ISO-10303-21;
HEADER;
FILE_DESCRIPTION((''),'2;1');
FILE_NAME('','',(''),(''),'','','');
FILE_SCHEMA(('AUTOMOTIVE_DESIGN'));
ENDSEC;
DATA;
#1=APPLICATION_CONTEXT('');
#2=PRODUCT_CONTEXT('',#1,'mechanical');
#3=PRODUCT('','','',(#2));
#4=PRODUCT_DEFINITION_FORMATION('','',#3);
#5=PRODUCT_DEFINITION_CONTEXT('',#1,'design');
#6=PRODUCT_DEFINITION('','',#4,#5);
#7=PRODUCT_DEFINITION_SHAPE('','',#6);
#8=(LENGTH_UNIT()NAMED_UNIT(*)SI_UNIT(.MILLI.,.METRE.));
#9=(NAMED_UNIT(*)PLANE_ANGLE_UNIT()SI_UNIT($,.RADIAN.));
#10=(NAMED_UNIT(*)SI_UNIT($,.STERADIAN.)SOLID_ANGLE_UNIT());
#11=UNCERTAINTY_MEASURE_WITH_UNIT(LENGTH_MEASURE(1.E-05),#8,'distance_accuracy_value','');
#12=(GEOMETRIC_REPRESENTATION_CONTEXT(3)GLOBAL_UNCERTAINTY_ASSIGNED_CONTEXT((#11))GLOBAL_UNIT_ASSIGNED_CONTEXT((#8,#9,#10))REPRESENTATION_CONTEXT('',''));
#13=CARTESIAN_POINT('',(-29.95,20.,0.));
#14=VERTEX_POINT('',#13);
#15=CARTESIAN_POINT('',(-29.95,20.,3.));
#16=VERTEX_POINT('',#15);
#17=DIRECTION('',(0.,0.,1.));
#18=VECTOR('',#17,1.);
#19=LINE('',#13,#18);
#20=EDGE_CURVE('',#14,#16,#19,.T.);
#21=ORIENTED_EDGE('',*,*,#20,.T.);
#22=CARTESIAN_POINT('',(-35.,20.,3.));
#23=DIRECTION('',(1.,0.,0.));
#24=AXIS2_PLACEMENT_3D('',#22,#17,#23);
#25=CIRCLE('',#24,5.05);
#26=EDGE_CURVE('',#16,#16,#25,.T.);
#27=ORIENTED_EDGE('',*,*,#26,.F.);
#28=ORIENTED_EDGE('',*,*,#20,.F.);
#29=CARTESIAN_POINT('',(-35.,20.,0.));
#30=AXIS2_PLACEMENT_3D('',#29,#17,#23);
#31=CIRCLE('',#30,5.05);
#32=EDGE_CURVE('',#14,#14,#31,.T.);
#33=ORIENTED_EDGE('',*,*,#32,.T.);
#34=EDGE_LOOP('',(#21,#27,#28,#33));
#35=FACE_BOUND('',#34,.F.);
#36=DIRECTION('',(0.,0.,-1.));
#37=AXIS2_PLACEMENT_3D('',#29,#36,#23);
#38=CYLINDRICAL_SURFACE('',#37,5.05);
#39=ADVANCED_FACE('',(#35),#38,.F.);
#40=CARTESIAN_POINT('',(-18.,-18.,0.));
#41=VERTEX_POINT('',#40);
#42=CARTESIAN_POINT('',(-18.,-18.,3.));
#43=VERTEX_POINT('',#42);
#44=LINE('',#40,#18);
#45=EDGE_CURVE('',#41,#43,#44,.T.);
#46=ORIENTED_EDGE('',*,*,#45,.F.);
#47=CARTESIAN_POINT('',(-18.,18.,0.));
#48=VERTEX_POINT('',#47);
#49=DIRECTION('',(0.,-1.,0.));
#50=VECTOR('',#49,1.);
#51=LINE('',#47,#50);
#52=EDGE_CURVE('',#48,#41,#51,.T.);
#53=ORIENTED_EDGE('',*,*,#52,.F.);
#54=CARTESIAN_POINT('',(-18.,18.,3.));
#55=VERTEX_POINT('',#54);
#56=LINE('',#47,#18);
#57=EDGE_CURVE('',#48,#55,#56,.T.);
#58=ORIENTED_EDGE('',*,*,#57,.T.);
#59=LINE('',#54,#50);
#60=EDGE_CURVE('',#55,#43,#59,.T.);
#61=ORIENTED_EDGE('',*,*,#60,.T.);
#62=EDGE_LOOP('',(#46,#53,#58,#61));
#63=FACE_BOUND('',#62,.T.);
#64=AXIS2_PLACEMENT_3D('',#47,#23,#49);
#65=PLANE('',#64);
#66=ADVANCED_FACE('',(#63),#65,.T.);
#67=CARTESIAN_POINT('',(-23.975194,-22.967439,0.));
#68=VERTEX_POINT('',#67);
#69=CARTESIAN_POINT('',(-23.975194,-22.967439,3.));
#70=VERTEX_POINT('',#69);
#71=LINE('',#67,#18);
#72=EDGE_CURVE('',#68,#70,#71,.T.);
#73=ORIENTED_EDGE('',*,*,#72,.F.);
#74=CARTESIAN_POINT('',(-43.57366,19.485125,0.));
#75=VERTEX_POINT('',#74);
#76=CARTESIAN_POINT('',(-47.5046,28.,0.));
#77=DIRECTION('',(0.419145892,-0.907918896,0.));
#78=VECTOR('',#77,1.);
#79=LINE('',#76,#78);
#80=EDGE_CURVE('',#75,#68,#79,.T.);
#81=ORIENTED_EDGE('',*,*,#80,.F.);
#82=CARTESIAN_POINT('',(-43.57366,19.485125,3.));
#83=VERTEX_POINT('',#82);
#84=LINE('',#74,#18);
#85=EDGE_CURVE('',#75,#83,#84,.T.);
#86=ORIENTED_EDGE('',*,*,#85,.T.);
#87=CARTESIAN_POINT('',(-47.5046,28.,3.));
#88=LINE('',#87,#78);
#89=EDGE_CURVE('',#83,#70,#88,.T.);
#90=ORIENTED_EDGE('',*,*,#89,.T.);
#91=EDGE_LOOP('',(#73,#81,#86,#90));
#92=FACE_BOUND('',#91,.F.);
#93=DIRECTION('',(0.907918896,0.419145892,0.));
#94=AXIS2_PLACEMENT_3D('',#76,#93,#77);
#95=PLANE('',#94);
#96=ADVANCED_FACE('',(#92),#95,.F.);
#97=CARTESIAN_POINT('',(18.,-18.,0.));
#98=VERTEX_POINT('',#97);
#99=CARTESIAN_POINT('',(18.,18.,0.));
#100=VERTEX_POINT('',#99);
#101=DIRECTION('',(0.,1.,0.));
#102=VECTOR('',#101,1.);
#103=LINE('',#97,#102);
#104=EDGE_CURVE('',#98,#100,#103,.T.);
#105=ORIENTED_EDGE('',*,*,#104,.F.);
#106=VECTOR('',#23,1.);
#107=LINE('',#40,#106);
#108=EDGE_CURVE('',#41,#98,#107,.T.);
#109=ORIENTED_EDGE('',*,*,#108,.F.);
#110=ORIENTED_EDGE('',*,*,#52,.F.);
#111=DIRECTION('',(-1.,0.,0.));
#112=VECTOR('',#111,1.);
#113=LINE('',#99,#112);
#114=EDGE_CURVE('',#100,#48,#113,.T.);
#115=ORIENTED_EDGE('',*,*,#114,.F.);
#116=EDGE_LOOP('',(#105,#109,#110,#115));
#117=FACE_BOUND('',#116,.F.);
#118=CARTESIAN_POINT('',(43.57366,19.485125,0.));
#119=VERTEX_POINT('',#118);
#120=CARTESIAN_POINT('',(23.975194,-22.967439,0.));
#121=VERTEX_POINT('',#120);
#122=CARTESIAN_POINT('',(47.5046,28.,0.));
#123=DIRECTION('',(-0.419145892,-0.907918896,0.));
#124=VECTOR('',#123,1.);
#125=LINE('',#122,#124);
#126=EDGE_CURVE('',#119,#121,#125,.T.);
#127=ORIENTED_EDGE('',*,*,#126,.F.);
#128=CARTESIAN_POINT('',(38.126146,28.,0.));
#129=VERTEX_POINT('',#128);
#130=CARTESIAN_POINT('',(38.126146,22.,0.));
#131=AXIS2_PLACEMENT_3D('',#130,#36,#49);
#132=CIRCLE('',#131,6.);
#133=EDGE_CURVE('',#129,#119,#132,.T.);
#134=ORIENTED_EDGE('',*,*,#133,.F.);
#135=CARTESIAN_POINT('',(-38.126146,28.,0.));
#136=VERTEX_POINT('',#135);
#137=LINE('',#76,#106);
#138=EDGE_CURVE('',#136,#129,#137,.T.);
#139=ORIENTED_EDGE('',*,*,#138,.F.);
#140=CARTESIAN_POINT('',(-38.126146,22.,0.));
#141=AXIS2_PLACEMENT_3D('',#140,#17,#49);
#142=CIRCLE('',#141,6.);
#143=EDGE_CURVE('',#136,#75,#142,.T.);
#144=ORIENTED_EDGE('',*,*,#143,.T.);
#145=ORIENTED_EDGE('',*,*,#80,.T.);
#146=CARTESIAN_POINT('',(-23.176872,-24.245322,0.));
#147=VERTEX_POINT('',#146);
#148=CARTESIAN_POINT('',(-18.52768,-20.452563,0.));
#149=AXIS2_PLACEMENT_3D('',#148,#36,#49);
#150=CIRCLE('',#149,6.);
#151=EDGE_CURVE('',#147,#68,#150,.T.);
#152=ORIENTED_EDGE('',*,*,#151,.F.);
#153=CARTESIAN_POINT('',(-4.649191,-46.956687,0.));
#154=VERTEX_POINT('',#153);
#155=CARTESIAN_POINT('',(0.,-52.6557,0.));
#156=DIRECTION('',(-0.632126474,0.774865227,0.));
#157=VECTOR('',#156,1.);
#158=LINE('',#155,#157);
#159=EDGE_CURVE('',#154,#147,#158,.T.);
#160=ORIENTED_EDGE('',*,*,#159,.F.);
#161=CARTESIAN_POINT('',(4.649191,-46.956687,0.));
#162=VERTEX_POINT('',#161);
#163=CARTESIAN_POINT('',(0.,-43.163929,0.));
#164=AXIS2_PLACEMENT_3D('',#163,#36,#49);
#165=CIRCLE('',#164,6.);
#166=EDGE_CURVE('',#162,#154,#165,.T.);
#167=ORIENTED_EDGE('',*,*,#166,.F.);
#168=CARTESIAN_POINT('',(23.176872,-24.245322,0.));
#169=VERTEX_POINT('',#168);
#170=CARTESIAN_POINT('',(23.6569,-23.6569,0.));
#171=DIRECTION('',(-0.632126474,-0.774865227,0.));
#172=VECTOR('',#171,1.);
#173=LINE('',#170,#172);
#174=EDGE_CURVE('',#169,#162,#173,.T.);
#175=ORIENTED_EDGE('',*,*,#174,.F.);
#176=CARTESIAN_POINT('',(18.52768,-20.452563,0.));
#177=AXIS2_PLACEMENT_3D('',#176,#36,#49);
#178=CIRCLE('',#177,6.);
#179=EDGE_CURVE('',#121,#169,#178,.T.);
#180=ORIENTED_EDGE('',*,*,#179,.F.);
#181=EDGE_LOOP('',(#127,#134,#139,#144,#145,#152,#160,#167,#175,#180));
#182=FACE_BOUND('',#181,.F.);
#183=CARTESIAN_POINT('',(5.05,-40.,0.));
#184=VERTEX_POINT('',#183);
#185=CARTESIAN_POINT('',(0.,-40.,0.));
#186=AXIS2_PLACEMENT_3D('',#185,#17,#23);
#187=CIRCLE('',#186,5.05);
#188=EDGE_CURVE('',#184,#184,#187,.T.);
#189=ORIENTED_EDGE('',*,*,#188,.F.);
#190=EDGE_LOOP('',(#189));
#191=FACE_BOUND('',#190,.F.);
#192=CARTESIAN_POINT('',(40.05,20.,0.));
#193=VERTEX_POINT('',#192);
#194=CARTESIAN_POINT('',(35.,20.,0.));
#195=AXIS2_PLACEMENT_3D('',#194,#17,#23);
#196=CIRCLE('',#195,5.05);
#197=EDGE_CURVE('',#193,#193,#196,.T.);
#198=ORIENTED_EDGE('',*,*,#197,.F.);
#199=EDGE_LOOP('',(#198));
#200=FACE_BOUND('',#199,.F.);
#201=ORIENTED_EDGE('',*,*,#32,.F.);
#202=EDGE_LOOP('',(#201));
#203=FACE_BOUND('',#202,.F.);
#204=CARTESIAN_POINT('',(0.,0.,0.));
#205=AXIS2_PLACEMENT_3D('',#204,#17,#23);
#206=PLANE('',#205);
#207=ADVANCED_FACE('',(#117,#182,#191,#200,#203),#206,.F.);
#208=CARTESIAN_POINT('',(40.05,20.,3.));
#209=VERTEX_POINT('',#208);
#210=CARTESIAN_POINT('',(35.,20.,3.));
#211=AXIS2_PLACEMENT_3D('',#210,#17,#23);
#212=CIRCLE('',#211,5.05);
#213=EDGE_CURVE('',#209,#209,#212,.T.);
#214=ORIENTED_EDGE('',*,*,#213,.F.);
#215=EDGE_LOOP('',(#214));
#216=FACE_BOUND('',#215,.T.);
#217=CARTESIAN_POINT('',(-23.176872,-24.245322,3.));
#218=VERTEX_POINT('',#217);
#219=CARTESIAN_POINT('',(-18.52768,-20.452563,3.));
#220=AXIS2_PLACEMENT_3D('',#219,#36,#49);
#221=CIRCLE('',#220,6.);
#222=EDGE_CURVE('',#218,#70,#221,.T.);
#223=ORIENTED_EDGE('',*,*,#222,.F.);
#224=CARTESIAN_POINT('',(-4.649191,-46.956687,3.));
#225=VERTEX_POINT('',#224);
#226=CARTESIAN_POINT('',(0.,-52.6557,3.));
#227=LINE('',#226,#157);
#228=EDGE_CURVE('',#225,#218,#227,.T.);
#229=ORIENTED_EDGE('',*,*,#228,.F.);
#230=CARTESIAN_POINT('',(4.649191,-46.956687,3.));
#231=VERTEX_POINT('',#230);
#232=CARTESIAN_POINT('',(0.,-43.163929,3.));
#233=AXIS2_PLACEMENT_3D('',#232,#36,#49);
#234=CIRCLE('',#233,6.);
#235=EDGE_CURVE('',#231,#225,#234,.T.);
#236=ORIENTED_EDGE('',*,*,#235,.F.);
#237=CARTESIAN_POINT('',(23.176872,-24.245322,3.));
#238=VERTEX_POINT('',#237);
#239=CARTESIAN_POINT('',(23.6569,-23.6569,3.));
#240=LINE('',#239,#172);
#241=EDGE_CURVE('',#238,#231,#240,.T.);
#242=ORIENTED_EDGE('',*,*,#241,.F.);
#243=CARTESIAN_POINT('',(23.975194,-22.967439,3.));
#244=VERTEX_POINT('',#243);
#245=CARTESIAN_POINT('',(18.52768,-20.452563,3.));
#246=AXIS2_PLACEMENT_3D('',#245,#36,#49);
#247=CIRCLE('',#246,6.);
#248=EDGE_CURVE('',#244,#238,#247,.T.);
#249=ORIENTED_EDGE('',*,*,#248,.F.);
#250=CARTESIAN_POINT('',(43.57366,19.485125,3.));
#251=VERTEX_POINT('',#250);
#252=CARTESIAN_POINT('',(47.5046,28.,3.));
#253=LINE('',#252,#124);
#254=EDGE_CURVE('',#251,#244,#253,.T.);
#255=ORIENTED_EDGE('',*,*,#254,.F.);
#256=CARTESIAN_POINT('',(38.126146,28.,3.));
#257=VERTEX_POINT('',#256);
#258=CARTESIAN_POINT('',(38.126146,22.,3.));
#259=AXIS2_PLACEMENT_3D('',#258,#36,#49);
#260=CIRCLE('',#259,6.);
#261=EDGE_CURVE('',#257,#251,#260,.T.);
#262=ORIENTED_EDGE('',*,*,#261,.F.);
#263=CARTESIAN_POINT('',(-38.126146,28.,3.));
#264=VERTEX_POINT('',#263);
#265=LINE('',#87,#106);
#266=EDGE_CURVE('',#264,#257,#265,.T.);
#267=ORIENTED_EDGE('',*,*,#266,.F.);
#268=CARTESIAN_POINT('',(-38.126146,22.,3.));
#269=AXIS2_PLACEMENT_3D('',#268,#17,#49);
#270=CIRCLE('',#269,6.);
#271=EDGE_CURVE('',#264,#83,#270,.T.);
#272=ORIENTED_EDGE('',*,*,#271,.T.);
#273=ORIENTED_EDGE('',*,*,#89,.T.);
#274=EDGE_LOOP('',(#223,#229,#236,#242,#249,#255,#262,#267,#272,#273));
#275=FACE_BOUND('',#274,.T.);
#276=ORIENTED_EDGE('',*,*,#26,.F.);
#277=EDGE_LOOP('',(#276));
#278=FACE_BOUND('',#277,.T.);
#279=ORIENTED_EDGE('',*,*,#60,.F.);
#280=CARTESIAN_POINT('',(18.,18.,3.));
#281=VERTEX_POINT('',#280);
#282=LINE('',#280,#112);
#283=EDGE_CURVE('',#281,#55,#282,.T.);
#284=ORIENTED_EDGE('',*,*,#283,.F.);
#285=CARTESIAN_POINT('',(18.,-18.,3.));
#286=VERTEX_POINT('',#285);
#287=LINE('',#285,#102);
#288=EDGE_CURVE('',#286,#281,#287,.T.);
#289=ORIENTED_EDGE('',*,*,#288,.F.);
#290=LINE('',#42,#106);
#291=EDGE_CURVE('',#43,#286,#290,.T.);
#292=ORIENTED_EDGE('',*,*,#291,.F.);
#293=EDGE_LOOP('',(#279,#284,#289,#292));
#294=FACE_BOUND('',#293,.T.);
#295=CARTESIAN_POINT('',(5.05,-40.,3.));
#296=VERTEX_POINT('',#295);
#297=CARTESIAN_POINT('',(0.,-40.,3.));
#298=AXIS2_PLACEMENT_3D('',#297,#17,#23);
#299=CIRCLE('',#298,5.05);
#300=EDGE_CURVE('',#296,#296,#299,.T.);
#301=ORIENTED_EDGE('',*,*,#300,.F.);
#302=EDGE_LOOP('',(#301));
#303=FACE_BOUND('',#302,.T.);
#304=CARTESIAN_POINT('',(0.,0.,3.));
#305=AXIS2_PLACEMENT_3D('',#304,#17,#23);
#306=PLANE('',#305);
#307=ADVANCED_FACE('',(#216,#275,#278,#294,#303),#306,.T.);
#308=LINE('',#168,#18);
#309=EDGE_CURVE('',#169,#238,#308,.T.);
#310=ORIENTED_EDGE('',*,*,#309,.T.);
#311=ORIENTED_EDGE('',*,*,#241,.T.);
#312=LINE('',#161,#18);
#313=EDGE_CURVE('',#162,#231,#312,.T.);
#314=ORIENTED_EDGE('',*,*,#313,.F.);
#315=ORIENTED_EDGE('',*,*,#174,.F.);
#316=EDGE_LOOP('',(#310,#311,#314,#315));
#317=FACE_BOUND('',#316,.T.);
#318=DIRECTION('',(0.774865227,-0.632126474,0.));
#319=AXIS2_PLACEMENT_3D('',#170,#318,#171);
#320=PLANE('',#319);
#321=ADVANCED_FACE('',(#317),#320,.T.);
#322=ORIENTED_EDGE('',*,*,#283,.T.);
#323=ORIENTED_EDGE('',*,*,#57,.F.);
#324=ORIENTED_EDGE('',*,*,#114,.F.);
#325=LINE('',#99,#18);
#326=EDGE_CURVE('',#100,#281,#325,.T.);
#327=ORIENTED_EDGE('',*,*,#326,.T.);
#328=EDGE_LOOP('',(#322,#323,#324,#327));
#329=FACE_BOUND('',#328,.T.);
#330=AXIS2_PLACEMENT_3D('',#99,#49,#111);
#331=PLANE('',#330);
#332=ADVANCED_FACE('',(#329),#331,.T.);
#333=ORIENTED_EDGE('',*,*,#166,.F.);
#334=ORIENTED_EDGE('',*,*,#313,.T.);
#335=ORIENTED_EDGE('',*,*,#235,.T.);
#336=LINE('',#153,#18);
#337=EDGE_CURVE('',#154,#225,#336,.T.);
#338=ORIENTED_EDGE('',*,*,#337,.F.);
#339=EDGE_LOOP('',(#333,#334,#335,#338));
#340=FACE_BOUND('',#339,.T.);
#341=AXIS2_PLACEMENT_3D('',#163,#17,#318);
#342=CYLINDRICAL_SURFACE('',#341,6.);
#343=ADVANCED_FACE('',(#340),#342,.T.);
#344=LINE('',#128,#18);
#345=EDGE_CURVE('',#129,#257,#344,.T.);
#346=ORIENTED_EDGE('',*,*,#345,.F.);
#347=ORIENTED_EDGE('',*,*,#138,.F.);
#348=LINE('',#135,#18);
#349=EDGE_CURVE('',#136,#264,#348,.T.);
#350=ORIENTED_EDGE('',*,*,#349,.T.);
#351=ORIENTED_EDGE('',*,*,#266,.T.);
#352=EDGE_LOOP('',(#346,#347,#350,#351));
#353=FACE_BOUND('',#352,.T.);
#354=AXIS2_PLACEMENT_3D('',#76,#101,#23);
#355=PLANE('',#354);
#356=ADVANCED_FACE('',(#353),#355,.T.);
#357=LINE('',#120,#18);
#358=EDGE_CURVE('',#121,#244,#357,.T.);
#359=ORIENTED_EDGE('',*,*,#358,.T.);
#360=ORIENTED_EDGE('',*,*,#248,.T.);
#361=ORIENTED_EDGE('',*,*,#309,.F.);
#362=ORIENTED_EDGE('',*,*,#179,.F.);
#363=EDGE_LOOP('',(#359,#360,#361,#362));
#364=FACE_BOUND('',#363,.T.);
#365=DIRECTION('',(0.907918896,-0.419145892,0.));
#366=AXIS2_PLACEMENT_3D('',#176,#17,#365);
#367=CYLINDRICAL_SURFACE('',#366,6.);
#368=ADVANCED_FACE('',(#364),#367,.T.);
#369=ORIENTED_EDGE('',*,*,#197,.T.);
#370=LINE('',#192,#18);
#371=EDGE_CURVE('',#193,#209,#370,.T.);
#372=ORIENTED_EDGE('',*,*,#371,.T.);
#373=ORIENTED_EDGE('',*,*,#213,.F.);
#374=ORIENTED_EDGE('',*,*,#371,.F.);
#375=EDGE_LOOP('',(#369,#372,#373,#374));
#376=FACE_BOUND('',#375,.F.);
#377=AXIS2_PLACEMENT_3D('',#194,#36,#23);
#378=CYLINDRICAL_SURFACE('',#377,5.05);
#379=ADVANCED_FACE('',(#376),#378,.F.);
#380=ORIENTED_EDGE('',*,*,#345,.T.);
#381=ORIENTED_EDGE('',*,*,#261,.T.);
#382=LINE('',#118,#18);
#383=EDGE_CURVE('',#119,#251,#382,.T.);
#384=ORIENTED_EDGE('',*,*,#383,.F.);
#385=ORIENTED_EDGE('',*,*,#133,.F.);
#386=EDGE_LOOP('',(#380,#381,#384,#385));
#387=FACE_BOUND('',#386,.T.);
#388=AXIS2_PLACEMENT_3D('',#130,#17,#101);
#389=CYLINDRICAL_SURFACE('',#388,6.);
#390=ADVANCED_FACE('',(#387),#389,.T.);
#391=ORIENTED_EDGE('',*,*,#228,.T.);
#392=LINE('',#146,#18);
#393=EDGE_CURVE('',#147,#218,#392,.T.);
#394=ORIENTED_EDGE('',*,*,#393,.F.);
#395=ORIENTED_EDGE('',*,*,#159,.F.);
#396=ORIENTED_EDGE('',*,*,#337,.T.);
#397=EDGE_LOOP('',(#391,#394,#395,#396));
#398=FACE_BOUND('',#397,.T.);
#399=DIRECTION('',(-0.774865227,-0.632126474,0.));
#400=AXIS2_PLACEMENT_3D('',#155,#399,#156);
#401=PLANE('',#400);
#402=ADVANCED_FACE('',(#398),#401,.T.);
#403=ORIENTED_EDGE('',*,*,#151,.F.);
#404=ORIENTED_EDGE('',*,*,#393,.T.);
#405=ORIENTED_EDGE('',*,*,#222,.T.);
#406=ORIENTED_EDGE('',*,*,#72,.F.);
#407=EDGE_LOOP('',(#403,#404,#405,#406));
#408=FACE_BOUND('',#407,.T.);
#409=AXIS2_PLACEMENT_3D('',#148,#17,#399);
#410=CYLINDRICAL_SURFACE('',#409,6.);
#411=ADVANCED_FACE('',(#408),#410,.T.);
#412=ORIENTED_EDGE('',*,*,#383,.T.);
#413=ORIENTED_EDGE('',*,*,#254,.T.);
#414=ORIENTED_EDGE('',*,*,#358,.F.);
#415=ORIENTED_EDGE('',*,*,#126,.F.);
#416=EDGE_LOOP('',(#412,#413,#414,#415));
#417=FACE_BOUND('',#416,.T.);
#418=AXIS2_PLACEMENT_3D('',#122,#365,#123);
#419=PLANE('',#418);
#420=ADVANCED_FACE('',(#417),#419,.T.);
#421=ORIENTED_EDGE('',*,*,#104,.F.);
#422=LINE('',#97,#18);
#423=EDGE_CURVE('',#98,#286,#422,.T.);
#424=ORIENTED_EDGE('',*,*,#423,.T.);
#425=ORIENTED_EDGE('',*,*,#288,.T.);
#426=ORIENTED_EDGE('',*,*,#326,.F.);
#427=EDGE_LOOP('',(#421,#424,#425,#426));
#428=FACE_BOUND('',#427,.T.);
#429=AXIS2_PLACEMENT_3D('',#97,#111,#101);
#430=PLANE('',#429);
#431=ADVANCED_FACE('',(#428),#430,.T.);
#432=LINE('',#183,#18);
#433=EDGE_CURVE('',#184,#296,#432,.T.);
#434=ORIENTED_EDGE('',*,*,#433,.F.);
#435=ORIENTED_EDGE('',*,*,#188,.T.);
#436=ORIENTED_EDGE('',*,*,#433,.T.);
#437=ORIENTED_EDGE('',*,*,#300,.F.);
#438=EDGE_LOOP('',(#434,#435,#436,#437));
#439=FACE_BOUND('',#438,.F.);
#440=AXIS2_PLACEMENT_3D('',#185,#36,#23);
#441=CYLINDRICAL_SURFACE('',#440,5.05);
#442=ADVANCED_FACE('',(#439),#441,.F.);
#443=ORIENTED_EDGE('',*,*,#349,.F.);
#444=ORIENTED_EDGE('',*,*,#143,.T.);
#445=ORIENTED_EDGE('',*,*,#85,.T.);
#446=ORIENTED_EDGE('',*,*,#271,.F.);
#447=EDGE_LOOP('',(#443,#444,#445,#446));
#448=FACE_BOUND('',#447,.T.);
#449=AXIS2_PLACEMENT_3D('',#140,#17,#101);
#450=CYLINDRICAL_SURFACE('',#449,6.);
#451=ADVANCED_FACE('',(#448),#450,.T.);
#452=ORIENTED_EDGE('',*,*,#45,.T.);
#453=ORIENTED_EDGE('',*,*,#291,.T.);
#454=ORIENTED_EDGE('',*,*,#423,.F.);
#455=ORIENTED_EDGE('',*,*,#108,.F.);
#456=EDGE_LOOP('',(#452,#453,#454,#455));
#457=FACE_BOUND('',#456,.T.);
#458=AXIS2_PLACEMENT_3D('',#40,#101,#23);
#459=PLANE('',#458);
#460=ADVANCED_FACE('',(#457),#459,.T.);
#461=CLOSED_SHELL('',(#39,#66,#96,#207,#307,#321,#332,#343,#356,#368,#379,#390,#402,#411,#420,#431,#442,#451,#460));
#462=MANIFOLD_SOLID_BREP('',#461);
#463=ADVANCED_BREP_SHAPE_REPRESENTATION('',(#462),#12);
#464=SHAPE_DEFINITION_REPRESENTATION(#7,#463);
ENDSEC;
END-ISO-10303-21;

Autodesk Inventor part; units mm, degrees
ref_plane "YZ Plane" through (0, 0, 0) normal (1, 0, 0) x (0, 1, 0)
ref_plane "XZ Plane" through (0, 0, 0) normal (0, 1, 0) x (-1, 0, 0)
ref_plane "XY Plane" through (0, 0, 0) normal (0, 0, 1) x (1, 0, 0)
sketch "Sketch6" plane through (0, 0, 0) normal (0, 0, 1) x (1, 0, 0)
  line L0 (18, 18) -> (-18, 18)
  line L1 (-18, 18) -> (-18, -18)
  line L2 (-18, -18) -> (18, -18)
  line L3 (18, -18) -> (18, 18)
  line L4 (18, 18) -> (-18, -18) construction
  circle A0 centre (0, -40) radius 5.05
  circle A1 centre (35, 20) radius 5.05
  circle A2 centre (-35, 20) radius 5.05
  line L5 (35, 20) -> (-35, 20) construction
  line L6 (-35, 20) -> (0, -40) construction
  line L7 (0, -40) -> (35, 20) construction
  line L8 (0, 18) -> (0, -18) construction
  line L9 (-47.5046, 28) -> (47.5046, 28)
  line L10 (-18, 18) -> (23.6569, -23.6569) construction
  line L11 (18, 18) -> (-23.6569, -23.6569) construction
  line L12 (47.5046, 28) -> (23.6569, -23.6569)
  line L13 (23.6569, -23.6569) -> (0, -52.6557)
  line L14 (0, -52.6557) -> (-23.6569, -23.6569)
  line L15 (-47.5046, 28) -> (-23.6569, -23.6569)
  line L16 (-35, 20) -> (-42.2633, 16.6468) construction
  line L17 (0, -40) -> (-6.1989, -45.057) construction
  point P0 (0, 0)
  point P1 (0, 0)
  point P2 (60, 0)
  point P3 (0, 28)
  point P4 (0, 0)
  dimension "d30" = 36
  dimension "d31" = 36
  dimension "d33" = 10.1
  dimension "d37" = 69.4622
  dimension "d52" = 70
  dimension "d53" = 8
  dimension "d54" = 20
  dimension "d57" = 8
  dimension "d59" = 8
  dimension "d60" = 95.0092
  dimension "d61" = 60
  dimension "d62" = 8
  dimension "d63" = 8
extrude "Plate3" add sketch "Sketch6" along normal blind 3
fillet "Corner Round2" radius 6 5 edges at (-47.5046, 28, 1.5) (47.5046, 28, 1.5) (0, -52.6557, 1.5) (-23.6569, -23.6569, 1.5) (23.6569, -23.6569, 1.5)
equation "\"d41\" = Thickness"
equation "\"BendReliefWidth\" = Thickness"
equation "\"BendReliefDepth\" = 0.5 * Thickness"
equation "\"CornerReliefSize\" = 4 * Thickness"
equation "\"MinimumRemnant\" = 2 * Thickness"
equation "\"TransitionRadius\" = BendRadius"
equation "\"JacobiRadiusSize\" = BendRadius"
equation "\"GapSize\" = Thickness"
equation "\"Thickness\" = 3"
equation "\"BendRadius\" = 5"
properties part number "MNT-CDF-504 small tube flange" material "Stainless Steel"
